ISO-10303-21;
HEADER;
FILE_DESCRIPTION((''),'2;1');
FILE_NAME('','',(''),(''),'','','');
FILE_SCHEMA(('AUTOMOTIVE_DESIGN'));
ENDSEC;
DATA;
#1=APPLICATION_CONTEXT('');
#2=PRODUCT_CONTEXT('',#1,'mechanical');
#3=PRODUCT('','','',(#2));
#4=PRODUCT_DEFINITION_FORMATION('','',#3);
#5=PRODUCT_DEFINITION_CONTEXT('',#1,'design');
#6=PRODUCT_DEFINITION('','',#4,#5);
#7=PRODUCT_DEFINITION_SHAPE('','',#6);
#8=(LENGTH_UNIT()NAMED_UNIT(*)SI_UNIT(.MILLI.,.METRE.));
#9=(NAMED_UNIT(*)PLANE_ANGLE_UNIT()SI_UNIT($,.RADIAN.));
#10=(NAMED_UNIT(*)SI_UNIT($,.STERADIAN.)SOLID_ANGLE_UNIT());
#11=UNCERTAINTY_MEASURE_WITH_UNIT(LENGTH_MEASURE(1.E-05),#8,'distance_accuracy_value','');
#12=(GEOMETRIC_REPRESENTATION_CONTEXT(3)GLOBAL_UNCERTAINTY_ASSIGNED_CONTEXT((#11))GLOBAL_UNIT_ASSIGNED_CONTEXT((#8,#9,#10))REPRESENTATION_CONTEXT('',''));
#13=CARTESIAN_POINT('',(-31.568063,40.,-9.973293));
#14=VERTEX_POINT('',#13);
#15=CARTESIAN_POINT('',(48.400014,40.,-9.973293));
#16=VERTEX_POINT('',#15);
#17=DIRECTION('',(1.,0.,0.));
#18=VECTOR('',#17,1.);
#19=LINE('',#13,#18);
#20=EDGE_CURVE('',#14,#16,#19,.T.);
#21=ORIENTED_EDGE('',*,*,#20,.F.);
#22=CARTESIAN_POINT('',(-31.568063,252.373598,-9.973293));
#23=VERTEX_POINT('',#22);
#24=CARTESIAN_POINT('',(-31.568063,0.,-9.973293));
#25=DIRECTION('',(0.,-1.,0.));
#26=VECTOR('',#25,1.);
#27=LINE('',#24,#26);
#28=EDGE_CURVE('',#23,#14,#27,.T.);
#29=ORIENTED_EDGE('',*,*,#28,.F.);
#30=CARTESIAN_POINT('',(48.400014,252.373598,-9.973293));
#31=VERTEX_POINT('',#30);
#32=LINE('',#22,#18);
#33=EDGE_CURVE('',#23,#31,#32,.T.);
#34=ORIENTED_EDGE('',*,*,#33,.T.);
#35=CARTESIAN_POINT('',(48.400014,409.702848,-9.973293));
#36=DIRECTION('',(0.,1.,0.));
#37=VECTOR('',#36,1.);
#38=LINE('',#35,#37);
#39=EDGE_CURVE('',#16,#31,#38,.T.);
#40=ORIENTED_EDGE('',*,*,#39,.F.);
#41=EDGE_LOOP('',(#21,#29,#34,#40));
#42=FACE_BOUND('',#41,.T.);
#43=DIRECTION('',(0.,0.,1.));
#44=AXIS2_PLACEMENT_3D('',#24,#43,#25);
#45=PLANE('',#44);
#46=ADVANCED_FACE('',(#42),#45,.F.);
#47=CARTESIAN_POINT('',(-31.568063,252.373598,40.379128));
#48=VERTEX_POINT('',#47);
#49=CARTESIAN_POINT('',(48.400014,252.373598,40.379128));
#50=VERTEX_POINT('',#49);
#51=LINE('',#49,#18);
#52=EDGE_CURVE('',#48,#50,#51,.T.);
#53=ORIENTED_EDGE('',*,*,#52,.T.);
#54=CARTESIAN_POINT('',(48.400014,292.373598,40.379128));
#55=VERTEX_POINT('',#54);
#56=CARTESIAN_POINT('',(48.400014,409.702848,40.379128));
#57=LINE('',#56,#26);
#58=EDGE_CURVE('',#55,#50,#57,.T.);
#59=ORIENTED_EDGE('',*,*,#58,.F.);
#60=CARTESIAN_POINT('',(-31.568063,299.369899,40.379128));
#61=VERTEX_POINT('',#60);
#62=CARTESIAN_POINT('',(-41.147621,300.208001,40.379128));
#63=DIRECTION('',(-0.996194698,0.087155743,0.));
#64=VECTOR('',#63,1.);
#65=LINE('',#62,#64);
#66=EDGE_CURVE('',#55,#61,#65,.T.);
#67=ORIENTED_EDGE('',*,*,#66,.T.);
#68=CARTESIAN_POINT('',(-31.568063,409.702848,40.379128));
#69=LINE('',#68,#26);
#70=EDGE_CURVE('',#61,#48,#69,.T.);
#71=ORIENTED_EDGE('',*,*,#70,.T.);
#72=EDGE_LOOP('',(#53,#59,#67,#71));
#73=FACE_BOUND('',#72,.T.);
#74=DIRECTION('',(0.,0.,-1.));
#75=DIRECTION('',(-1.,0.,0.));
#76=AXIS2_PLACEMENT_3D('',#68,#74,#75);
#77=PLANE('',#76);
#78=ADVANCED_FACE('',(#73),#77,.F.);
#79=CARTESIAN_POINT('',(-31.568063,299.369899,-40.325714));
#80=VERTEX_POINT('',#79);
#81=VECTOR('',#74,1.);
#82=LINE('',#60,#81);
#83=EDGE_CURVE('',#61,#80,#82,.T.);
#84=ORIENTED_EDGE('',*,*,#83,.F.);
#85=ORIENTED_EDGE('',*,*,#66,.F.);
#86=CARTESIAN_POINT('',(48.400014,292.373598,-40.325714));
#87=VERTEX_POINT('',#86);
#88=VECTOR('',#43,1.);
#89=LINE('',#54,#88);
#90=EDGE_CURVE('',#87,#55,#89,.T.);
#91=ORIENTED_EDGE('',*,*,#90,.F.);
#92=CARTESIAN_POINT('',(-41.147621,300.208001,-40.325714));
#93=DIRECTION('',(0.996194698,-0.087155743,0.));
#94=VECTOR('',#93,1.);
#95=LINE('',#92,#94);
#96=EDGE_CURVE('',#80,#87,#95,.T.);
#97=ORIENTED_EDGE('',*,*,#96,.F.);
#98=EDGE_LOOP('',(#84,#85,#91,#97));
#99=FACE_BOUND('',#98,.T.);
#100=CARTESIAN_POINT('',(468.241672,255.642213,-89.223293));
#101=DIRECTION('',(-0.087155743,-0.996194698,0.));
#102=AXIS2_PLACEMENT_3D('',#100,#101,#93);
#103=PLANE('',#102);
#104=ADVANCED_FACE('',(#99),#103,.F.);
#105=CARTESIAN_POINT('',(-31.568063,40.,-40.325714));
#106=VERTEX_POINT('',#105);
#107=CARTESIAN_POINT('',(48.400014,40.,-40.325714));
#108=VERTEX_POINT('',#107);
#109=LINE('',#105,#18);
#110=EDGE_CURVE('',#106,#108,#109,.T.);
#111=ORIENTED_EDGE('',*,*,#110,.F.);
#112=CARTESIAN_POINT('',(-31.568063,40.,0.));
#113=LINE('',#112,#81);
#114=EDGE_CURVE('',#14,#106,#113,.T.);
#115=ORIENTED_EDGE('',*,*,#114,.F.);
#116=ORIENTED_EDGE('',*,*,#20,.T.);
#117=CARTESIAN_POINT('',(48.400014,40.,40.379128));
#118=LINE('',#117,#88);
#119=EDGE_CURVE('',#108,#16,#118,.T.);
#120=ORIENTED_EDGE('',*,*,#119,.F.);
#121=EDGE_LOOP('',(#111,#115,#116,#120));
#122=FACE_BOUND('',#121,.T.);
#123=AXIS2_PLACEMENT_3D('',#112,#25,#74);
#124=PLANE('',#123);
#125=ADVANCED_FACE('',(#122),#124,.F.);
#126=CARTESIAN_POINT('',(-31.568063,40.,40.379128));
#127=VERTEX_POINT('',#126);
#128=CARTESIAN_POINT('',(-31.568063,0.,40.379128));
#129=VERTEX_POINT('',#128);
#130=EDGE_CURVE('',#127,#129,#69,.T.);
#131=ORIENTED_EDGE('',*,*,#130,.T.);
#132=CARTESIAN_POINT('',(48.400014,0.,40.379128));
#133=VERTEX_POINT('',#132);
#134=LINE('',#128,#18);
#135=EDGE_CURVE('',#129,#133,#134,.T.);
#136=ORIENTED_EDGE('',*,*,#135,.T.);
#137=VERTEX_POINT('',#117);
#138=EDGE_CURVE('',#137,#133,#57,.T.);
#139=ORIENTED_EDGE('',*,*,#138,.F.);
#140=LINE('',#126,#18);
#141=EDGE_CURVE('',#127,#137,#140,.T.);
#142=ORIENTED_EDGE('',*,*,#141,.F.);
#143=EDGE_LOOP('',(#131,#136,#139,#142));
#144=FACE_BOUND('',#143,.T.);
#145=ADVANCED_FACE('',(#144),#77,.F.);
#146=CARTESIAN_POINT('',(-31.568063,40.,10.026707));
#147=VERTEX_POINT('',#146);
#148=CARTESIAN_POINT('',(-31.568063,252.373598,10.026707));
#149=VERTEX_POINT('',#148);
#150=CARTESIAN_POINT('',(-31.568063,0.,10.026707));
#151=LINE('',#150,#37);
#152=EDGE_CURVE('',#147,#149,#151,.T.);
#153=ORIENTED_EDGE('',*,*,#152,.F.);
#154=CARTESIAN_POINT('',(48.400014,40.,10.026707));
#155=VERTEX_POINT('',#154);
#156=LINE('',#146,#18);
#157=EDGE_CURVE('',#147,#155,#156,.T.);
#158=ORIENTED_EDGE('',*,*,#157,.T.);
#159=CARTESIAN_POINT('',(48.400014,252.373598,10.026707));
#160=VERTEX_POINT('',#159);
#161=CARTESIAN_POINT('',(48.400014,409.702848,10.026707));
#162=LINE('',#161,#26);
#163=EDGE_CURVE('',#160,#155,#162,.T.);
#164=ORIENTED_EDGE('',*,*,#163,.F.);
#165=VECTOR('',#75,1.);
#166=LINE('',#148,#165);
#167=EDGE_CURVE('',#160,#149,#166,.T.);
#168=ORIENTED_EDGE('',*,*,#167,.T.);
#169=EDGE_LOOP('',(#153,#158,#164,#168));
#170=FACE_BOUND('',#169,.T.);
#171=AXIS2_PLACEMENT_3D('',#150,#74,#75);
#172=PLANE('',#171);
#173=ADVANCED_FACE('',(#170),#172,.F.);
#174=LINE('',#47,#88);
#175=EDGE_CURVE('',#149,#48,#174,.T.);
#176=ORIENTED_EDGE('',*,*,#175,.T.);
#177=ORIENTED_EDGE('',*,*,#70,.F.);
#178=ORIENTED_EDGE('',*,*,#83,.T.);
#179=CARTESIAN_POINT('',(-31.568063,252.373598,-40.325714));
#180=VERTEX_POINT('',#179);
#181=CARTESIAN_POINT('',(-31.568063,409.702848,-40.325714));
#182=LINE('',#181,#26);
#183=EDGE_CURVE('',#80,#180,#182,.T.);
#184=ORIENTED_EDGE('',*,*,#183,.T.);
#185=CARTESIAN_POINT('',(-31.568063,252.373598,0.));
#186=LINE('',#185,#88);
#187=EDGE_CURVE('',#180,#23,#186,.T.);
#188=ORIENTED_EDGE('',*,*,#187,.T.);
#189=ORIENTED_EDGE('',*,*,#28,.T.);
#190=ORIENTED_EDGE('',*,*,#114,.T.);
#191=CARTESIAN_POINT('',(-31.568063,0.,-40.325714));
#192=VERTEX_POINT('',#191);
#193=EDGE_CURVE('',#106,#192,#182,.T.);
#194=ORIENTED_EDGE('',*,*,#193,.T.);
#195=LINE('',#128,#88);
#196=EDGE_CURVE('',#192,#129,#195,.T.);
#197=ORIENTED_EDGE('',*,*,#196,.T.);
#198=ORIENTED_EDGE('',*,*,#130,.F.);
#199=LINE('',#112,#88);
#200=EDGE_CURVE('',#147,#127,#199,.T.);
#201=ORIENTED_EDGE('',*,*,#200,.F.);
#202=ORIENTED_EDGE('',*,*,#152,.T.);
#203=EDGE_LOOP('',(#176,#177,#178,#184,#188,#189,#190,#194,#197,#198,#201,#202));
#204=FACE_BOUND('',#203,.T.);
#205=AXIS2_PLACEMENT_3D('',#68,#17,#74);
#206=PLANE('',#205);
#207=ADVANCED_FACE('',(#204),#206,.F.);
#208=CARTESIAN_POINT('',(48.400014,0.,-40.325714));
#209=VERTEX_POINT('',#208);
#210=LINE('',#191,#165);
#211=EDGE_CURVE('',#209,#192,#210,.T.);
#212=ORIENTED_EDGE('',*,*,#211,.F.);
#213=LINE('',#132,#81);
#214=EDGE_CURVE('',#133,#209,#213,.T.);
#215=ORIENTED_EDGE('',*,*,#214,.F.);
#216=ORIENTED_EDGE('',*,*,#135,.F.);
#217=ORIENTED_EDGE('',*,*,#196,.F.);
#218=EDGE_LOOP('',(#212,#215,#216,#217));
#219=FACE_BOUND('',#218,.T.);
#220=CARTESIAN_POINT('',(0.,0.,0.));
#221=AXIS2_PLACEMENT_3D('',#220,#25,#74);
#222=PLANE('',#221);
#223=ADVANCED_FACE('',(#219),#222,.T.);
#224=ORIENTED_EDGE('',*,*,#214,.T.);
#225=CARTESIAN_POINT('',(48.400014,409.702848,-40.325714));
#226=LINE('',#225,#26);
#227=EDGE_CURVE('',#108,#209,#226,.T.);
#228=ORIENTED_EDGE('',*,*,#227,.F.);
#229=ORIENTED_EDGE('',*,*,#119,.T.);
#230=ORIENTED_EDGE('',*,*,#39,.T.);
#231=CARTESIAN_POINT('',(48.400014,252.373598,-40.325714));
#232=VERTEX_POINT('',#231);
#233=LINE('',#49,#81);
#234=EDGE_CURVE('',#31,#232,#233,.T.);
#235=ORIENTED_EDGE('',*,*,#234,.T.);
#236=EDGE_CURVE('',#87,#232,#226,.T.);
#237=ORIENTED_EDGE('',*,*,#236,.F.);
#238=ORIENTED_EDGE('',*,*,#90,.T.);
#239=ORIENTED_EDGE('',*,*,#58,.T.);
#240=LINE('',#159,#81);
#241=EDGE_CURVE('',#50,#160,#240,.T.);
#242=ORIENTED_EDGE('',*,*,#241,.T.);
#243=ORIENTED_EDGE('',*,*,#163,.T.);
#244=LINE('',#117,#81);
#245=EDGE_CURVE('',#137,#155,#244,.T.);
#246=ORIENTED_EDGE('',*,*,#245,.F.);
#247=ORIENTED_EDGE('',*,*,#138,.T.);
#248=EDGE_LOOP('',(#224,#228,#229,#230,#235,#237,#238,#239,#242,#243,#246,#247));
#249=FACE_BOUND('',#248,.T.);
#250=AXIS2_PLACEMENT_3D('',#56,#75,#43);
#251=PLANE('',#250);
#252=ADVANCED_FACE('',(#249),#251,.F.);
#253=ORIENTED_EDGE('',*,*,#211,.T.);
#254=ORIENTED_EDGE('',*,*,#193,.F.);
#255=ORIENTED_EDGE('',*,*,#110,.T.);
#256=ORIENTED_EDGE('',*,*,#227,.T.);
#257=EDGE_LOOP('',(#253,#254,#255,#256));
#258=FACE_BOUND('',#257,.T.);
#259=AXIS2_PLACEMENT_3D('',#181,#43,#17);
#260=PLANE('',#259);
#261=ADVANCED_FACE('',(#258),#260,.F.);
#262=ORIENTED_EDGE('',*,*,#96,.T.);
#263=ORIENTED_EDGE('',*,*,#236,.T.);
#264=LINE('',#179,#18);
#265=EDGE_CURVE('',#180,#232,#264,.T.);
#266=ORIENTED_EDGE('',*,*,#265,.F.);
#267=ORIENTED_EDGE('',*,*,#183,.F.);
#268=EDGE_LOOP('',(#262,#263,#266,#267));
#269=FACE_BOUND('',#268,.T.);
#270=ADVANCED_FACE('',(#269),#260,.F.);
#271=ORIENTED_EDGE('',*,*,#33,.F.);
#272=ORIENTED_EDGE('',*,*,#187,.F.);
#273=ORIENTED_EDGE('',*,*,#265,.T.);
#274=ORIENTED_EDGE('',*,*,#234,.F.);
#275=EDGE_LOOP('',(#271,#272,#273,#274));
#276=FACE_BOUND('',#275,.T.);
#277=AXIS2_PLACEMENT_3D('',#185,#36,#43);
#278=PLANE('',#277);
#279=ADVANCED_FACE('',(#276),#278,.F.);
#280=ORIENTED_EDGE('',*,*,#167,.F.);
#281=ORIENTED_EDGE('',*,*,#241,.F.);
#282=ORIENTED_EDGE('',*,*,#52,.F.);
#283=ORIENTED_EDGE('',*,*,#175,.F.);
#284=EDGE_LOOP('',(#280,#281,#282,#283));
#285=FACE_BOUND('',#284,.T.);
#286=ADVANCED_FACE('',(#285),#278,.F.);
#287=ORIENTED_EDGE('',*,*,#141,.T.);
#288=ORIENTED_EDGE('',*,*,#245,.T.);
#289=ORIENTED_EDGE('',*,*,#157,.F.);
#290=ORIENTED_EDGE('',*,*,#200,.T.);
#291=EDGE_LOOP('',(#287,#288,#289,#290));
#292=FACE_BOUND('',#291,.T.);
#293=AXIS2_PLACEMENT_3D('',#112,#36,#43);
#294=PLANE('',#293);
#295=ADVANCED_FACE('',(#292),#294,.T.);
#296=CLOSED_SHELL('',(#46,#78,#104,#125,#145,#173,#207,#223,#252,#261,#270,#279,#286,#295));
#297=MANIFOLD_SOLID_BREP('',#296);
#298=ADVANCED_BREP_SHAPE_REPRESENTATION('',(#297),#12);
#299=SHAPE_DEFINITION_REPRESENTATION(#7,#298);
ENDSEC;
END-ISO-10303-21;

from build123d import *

# Parameters (mm, degrees)
BOSS_EXTRUDE1_START     = -40.32571447
BOSS_EXTRUDE1_DEPTH     = 80.704842411
CUT_EXTRUDE1_DEPTH      = 313.486325482
CUT_EXTRUDE1_DEPTH_BACK = 313.486325482
SKETCH2_W               = 30.352421206
SKETCH2_H               = 220
SKETCH2_W_2             = 30.352421205
SKETCH2_H_2             = 212.373598339
SKETCH5_W               = 79.968077757
SKETCH5_H               = 30.352421206
BOSS_EXTRUDE2_DEPTH     = 7.626401661


# Read off the part's stored shape, not the designer's step: Boss-Extrude1
with BuildPart() as part:
    # Boss-Extrude1 outline → Boss-Extrude1 (new body)
    with BuildSketch(Plane.XY.offset(BOSS_EXTRUDE1_START)):
        Polygon((-31.568063376, 299.369898587), (-31.568063376, 0), (48.400014381, 0), (48.400014381, 292.373598339), align=None)
    extrude(amount=BOSS_EXTRUDE1_DEPTH)

    # Sketch2 → Cut-Extrude1 (cut, two sides: drawn at the far end of the back side and taken through both)
    with BuildSketch(Plane(origin=(48.400014381, 0, 0), x_dir=(0, 0, -1), z_dir=(1, 0, 0)).offset(-CUT_EXTRUDE1_DEPTH_BACK)):
        with Locations((-25.202917338, 150)):
            Rectangle(SKETCH2_W, SKETCH2_H)
        with Locations((25.149503868, 146.18679917)):
            Rectangle(SKETCH2_W_2, SKETCH2_H_2)
    extrude(amount=CUT_EXTRUDE1_DEPTH + CUT_EXTRUDE1_DEPTH_BACK, mode=Mode.SUBTRACT)

    # Sketch5 → Boss-Extrude2 (add)
    with BuildSketch(Plane.XZ.offset(-260)):
        with Locations((8.415975503, 25.202917338)):
            Rectangle(SKETCH5_W, SKETCH5_H)
    extrude(amount=BOSS_EXTRUDE2_DEPTH)


solid = part.part
